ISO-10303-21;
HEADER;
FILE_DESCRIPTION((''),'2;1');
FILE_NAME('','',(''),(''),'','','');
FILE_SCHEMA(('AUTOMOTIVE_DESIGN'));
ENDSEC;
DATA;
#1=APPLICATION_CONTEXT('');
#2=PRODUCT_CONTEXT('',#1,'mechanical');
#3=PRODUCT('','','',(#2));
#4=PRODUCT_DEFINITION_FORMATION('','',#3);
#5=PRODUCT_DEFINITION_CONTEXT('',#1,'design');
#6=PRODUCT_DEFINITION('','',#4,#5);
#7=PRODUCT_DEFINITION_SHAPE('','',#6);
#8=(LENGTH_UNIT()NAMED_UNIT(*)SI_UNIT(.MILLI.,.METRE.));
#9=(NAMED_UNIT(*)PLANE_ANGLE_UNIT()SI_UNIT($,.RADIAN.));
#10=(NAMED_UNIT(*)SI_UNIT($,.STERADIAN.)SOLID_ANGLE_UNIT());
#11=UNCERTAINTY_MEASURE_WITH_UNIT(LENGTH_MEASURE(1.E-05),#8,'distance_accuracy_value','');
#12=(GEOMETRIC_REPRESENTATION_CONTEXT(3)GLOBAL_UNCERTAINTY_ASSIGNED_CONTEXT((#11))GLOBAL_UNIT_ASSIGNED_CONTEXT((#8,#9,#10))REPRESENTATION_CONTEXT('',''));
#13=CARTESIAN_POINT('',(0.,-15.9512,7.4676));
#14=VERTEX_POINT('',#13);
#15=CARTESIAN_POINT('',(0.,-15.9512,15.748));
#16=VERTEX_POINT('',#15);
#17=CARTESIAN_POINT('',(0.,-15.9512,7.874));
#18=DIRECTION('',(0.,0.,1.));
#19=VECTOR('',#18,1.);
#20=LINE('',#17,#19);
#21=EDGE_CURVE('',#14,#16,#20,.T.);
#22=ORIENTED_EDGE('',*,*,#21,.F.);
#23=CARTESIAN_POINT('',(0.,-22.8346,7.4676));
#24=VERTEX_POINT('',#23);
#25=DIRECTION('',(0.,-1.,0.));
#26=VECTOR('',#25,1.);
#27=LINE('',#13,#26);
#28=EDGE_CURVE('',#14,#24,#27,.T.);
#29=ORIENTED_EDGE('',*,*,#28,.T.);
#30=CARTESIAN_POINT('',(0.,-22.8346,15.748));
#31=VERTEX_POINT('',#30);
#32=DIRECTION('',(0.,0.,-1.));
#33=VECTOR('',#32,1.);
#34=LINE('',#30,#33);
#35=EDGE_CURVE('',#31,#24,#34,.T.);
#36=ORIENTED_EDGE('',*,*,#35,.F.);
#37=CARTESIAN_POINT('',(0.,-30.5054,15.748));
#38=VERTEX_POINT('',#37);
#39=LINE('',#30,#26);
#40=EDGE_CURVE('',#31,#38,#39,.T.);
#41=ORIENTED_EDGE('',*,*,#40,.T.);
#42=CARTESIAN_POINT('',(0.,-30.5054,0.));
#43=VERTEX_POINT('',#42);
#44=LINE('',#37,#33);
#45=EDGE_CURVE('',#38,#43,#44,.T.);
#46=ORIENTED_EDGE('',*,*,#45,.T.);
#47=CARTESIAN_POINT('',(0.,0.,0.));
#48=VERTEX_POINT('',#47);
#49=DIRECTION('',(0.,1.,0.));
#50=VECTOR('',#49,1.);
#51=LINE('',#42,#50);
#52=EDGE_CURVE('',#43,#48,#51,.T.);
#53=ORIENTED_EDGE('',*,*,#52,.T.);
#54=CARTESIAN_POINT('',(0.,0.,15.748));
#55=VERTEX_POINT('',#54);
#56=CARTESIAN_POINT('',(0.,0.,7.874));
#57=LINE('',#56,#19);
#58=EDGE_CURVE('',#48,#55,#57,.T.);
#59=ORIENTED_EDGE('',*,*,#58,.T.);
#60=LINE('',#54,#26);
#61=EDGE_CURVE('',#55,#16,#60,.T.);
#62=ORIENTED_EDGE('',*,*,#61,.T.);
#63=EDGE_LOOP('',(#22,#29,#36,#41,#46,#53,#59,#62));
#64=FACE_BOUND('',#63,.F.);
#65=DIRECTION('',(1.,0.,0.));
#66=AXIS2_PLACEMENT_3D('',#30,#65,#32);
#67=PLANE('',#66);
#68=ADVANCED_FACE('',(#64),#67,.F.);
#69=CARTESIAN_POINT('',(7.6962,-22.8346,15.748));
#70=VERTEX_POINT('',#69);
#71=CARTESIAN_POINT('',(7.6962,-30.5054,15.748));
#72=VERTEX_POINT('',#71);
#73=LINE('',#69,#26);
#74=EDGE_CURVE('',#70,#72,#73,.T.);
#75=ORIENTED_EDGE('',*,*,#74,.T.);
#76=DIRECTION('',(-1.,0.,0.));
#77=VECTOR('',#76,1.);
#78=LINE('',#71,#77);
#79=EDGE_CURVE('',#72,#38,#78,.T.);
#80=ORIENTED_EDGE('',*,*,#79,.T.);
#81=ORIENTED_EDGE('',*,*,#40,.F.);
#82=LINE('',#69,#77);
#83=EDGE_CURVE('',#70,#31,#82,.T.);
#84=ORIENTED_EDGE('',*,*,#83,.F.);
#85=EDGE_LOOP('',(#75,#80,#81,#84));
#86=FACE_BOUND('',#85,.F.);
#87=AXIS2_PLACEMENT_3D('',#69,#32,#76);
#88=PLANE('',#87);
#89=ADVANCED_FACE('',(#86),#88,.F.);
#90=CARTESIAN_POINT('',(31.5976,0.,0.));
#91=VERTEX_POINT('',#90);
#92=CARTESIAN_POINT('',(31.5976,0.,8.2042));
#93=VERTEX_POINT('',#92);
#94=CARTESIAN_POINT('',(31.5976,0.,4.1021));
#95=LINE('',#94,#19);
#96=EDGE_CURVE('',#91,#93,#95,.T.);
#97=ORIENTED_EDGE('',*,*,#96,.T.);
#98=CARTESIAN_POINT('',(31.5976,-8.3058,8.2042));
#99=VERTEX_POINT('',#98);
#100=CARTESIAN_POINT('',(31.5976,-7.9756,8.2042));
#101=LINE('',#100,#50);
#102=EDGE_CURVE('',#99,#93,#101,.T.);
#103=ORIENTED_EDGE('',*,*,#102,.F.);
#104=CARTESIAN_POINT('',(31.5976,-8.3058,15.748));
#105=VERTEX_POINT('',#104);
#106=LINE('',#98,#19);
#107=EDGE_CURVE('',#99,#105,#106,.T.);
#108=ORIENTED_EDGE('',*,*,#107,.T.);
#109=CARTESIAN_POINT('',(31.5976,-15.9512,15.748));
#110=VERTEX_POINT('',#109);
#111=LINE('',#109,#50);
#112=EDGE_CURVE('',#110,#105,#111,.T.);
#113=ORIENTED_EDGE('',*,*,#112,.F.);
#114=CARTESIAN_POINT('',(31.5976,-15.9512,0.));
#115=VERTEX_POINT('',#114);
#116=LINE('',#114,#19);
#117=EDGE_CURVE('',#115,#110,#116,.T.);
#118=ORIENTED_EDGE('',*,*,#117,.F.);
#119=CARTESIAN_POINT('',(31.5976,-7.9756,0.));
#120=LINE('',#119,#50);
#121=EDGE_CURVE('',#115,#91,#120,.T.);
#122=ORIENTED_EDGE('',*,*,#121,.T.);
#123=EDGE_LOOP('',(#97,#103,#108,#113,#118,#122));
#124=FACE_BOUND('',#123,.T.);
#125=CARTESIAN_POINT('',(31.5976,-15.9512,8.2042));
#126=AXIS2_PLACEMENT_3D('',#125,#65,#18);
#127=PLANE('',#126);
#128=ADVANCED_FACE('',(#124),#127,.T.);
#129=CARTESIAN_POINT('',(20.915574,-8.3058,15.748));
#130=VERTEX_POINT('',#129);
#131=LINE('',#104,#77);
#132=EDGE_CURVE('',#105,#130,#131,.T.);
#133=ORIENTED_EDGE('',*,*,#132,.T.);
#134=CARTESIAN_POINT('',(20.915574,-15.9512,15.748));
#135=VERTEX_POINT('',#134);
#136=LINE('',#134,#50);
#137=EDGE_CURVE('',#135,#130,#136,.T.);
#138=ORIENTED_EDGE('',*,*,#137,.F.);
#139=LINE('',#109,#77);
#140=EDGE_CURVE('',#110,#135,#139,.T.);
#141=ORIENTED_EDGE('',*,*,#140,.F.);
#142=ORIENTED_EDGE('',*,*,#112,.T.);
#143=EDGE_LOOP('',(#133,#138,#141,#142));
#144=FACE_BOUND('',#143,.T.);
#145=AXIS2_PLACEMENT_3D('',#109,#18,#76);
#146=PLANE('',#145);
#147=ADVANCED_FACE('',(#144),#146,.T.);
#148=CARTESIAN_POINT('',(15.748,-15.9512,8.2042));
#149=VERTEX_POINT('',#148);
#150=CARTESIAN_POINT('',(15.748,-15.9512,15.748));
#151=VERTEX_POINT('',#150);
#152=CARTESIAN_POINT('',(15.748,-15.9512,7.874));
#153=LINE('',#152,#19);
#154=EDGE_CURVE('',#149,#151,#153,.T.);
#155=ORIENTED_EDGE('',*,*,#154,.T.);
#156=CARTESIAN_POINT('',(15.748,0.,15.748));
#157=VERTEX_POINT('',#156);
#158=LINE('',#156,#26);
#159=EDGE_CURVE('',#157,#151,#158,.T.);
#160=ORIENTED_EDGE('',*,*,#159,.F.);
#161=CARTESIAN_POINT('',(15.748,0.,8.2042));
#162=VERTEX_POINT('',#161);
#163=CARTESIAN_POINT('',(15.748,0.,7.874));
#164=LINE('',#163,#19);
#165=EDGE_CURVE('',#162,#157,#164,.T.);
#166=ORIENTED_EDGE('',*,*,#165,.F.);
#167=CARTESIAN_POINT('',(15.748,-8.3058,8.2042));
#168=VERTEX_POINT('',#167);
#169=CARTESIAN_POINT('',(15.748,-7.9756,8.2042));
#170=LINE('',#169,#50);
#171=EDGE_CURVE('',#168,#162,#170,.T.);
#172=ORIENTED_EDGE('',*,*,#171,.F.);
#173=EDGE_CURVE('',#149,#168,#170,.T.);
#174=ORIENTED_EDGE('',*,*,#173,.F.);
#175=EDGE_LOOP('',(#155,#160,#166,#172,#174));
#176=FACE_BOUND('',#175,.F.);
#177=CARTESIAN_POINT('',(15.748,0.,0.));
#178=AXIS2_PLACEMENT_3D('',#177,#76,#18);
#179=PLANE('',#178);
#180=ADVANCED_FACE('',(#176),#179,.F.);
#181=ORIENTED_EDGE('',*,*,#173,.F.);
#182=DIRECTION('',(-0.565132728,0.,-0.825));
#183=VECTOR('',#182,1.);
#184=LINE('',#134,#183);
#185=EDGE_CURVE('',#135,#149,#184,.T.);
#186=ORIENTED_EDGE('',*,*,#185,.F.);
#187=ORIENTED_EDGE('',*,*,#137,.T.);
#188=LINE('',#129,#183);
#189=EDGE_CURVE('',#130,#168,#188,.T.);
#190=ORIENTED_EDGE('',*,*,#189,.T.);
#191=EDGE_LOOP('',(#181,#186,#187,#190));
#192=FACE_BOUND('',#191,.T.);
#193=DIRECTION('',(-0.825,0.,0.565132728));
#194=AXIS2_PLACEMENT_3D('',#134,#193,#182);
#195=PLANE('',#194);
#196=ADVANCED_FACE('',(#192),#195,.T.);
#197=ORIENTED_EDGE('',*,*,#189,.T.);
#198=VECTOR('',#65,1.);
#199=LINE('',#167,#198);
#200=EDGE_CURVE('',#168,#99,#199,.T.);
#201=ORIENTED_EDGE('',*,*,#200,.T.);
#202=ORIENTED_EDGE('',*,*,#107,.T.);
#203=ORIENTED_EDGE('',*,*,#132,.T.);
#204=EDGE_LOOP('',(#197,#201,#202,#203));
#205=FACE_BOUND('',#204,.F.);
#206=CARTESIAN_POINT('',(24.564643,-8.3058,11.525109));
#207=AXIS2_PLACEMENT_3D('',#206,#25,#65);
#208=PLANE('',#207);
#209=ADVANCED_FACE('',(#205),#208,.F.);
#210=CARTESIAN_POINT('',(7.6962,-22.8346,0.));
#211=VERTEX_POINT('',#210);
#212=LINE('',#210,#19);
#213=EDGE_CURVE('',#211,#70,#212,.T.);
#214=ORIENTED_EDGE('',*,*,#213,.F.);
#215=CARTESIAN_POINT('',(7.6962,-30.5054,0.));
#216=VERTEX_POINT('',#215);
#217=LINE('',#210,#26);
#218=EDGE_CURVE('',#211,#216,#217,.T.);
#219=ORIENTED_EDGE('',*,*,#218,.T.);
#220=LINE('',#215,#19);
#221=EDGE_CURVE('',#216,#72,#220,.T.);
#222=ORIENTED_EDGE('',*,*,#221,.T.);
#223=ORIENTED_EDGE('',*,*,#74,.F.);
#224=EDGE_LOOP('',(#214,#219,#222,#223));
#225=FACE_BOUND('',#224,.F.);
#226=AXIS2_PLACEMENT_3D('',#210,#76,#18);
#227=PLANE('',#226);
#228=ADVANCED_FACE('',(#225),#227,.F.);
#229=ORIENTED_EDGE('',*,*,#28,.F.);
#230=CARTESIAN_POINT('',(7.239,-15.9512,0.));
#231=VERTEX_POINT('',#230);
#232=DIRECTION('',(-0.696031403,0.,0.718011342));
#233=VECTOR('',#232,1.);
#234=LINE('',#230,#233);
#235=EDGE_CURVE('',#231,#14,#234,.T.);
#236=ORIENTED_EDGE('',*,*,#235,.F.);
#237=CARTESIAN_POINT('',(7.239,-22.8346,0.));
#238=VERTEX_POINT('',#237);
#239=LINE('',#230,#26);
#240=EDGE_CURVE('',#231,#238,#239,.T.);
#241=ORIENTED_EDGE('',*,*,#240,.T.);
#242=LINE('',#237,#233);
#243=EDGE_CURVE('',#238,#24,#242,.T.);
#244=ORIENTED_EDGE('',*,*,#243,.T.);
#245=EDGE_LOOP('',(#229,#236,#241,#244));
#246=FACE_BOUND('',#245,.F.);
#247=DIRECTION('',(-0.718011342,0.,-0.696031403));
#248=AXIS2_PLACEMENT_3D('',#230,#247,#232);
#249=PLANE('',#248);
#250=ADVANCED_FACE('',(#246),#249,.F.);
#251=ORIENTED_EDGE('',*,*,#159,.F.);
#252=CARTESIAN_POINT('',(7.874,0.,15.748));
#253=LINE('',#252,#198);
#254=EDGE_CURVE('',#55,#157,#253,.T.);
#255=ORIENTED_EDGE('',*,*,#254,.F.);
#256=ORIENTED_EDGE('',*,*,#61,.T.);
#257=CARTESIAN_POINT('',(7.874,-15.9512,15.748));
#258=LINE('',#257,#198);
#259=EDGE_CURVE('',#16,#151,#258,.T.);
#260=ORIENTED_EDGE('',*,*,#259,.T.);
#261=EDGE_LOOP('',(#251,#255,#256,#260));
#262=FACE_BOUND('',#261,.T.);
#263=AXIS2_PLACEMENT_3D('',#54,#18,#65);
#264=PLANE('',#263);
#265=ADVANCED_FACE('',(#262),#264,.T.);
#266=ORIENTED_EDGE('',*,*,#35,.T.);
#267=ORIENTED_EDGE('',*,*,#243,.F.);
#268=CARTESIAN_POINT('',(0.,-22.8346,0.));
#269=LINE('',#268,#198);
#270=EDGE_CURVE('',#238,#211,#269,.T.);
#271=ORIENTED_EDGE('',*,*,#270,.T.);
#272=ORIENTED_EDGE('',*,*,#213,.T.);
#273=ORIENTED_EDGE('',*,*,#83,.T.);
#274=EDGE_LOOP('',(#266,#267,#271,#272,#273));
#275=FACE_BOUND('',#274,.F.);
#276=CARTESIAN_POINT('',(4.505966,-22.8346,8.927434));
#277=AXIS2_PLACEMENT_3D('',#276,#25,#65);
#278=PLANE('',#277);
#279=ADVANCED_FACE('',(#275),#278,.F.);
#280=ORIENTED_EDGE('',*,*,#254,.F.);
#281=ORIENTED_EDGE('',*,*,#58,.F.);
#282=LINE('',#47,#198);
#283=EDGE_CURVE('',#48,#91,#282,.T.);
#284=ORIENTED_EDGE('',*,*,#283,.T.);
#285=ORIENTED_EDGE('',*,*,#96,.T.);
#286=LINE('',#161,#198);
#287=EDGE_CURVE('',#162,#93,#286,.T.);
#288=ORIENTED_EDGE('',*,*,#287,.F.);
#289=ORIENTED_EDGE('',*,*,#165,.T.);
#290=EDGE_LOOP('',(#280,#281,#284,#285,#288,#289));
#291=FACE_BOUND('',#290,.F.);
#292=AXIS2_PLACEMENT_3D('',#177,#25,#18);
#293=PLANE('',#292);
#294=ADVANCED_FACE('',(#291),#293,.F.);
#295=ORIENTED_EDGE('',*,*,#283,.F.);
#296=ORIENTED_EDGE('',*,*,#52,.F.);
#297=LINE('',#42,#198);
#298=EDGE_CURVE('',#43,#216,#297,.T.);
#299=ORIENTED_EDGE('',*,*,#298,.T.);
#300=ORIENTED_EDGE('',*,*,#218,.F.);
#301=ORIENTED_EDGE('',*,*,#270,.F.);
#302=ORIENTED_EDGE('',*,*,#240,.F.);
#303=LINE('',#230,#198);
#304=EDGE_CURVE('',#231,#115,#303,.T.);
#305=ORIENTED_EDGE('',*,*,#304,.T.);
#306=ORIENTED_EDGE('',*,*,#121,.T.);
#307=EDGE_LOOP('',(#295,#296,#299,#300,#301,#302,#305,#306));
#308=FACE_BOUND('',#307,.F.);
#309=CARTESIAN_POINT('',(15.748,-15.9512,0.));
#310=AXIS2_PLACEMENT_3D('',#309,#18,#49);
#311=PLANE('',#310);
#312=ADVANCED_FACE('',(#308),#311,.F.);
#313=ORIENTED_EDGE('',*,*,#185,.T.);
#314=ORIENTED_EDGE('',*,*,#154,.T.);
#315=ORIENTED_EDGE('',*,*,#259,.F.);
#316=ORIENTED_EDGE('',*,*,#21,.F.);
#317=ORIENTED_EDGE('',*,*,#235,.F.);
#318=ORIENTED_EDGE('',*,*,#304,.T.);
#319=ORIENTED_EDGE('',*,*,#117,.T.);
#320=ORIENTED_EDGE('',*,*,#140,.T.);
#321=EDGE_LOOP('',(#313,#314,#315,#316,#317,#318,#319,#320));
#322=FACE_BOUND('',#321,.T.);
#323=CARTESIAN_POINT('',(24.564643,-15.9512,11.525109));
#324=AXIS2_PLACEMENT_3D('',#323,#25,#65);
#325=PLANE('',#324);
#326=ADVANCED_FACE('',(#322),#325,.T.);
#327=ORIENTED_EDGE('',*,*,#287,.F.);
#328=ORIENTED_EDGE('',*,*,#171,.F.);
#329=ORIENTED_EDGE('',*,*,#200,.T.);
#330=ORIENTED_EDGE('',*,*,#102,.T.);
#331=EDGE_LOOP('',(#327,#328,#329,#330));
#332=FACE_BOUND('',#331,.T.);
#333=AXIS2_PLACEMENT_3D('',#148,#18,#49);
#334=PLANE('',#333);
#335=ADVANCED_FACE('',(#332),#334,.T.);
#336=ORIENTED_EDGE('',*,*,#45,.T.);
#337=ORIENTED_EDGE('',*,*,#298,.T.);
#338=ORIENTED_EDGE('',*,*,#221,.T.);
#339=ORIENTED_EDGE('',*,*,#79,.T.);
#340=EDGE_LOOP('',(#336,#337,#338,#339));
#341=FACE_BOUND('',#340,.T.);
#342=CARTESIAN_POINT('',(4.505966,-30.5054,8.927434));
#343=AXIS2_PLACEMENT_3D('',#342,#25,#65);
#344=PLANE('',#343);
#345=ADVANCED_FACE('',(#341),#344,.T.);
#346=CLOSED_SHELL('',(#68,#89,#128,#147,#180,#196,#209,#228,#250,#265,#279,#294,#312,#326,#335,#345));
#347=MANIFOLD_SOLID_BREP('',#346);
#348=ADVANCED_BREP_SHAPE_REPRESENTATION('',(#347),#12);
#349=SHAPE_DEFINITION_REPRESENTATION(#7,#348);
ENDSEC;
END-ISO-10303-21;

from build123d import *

# Parameters (mm, degrees)
F0_W     = 15.748
F0_H     = 15.748
F1_DEPTH = 15.9512
F3_DEPTH = 6.8834
F5_DEPTH = 7.6708
F6_W     = 15.9512
F6_H     = 8.2042
F7_DEPTH = 15.8496
F9_DEPTH = 7.6454


with BuildPart() as f1:
    # F0 (on Front) → F1 (new body)
    with BuildSketch(Plane.XZ):
        with Locations((7.874, 7.874)):
            Rectangle(F0_W, F0_H)
    extrude(amount=F1_DEPTH)

    # F2 (on face) → F3 (join)
    with BuildSketch(Plane.XZ.offset(15.9512)):
        Polygon((0, 7.4676), (0, 0), (7.239, 0), align=None)
    extrude(amount=F3_DEPTH)

    # F4 (on face) → F5 (join)
    with BuildSketch(Plane.XZ.offset(22.8346)):
        Polygon((0, 7.4676), (7.239, 0), (7.6962, 0), (7.6962, 15.748), (0, 15.748), align=None)
        Polygon((0, 7.4676), (0, 0), (7.239, 0), align=None)
    extrude(amount=F5_DEPTH)

    # F6 (on face) → F7 (join)
    with BuildSketch(Plane.YZ.offset(15.748)):
        with Locations((-7.9756, 4.1021)):
            Rectangle(F6_W, F6_H)
    extrude(amount=F7_DEPTH)

    # F8 (on face) → F9 (join)
    with BuildSketch(Plane.XZ.offset(15.9512)):
        Polygon((20.9155736628, 15.748), (15.748, 8.2042), (31.5976, 8.2042), (31.5976, 15.748), align=None)
    extrude(amount=-F9_DEPTH)


solid = f1.part
